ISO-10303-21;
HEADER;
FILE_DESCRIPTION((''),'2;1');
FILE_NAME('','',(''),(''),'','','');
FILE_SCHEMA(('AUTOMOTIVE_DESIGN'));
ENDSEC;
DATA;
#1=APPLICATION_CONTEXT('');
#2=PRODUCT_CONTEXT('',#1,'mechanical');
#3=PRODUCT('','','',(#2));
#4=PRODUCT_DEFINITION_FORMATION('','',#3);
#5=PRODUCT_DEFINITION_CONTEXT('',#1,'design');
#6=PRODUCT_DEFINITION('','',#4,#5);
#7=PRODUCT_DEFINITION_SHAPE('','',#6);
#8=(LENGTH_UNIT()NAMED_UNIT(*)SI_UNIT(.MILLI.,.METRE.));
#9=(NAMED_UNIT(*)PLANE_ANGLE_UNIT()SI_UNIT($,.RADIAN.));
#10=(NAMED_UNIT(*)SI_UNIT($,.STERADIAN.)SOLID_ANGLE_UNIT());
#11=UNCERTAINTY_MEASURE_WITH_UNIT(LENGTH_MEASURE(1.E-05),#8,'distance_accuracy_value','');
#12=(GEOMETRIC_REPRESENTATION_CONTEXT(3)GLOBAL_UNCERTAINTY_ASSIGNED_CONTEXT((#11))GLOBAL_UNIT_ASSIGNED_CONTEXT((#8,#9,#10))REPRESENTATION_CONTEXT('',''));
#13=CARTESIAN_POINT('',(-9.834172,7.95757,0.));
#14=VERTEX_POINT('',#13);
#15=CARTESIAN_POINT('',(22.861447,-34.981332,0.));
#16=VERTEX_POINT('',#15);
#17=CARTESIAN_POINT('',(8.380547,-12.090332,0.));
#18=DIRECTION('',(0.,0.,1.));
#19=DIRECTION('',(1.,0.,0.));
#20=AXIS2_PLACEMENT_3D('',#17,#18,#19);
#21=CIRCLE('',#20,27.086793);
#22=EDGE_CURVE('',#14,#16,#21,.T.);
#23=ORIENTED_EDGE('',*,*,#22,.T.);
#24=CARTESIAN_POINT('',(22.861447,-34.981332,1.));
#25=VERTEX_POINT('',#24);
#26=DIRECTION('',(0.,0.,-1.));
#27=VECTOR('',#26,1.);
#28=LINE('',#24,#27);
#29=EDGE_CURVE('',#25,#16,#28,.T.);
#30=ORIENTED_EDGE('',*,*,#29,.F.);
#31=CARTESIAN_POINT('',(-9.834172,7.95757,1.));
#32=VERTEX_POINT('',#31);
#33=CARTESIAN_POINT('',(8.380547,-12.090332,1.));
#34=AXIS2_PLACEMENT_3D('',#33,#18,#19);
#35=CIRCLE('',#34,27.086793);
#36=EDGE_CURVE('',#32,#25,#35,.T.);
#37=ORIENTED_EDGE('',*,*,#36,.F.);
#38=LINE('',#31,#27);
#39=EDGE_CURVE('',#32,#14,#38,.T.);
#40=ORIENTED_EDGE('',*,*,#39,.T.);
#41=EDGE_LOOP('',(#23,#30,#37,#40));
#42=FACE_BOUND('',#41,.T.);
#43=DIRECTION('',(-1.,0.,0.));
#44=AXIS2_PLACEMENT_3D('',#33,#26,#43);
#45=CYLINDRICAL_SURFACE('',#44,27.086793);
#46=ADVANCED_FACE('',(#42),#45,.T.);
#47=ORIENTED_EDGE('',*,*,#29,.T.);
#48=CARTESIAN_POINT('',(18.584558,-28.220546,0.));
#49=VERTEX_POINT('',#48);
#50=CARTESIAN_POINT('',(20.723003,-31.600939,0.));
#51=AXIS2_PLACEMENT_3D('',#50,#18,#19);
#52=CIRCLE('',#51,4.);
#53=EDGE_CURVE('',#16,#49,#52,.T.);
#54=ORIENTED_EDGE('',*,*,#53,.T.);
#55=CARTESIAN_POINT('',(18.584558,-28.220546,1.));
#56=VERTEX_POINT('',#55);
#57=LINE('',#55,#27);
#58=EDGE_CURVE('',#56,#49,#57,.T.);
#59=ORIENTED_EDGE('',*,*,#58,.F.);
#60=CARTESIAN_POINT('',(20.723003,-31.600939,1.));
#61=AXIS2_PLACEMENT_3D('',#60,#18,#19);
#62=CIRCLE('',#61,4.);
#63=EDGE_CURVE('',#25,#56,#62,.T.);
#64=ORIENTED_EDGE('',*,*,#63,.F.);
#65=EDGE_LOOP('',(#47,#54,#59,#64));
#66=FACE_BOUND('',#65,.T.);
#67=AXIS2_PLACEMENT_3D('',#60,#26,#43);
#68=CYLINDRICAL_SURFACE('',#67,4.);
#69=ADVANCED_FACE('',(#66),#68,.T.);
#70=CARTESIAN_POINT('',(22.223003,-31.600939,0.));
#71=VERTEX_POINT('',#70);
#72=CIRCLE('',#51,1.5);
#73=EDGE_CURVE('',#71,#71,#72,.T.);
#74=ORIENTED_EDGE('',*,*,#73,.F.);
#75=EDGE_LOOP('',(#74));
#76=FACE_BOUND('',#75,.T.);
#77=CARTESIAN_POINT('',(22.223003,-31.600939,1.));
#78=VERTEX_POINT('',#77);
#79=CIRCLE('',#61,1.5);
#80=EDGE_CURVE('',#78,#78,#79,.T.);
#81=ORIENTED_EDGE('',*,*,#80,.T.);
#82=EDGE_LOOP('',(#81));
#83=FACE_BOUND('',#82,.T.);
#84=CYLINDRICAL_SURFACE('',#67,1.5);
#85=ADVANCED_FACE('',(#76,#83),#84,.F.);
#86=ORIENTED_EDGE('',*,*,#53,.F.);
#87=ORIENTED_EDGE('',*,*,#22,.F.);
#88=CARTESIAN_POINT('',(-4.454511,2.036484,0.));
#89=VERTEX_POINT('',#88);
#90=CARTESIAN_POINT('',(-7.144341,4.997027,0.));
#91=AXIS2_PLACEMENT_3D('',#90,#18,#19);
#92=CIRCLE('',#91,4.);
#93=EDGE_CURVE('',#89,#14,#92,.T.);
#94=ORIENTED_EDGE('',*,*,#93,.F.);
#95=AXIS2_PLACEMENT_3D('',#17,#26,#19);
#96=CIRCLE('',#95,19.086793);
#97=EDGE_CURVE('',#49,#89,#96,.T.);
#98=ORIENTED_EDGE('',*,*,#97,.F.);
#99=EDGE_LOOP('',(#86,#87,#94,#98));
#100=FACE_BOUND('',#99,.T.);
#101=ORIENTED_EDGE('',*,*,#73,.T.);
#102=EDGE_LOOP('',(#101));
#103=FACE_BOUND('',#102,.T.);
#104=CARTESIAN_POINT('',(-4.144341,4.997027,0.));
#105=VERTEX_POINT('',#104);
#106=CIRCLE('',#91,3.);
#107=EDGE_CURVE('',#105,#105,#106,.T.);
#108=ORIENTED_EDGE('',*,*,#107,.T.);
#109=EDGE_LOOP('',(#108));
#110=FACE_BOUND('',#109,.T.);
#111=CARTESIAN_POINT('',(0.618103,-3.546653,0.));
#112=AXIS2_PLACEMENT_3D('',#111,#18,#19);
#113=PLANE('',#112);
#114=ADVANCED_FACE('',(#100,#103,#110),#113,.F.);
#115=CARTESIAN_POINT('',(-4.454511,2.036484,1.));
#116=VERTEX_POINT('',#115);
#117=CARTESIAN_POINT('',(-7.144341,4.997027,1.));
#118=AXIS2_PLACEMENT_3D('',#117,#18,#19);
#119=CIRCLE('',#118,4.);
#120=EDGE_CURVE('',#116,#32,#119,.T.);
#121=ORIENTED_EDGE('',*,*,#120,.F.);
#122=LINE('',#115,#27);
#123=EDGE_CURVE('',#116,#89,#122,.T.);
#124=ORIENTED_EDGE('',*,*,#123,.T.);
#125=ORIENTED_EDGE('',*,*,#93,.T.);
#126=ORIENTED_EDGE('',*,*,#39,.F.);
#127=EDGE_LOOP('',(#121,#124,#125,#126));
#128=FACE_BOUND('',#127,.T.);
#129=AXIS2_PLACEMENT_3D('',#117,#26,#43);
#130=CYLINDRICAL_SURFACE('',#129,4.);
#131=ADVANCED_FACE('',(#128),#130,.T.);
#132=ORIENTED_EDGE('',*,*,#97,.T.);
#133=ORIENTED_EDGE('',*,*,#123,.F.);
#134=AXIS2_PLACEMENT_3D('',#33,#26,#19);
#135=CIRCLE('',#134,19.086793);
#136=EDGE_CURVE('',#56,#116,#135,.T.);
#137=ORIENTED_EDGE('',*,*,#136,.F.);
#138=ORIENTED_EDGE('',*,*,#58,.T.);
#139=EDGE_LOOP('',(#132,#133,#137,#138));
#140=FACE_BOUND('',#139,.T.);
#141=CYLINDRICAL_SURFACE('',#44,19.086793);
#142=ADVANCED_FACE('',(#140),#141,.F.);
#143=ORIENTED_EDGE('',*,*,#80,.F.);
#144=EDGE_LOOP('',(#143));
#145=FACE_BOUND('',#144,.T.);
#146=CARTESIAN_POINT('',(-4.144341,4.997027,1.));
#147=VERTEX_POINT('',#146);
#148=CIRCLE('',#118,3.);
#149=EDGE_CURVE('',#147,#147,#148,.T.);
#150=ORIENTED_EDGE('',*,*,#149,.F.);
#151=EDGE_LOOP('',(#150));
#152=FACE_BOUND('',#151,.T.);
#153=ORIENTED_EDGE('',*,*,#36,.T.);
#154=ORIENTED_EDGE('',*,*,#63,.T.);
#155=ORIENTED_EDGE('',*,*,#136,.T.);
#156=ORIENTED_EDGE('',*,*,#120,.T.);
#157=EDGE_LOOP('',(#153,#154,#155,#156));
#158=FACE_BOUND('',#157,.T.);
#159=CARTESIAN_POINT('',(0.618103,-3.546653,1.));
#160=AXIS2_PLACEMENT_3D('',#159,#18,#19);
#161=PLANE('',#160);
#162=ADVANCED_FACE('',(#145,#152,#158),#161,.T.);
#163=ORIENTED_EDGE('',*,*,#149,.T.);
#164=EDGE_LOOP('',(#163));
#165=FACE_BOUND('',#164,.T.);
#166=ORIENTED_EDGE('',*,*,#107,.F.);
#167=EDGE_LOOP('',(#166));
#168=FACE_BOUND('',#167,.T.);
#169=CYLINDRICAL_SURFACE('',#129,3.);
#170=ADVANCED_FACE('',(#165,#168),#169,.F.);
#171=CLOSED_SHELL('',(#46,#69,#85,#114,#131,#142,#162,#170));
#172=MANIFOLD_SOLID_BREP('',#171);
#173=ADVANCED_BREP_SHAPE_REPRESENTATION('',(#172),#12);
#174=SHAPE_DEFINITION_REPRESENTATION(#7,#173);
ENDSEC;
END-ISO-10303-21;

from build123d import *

# Parameters (mm, degrees)
ESQUISSE1_R               = 1.5
ESQUISSE1_R_2             = 3
T_LE_DE_BASE_PLI_E1_DEPTH = 1


# Sheet-metal steps are written as plain solids
with BuildPart() as part:
    # Esquisse1 → Tôle de base pliée1 (new body)
    with BuildSketch(Plane.XY):
        with BuildLine():
            ThreePointArc((-9.834171673, 7.957569633), (-13.169921185, -28.499832093), (22.861447454, -34.981331874))
            ThreePointArc((22.861447454, -34.981331874), (24.103395688, -29.462494624), (18.584558439, -28.22054639))
            ThreePointArc((18.584558439, -28.22054639), (-6.805057533, -23.653337412), (-4.454511265, 2.0364841))
            ThreePointArc((-4.454511265, 2.0364841), (-4.183798702, 7.686857071), (-9.834171673, 7.957569633))
        make_face()
        with Locations((20.723002946, -31.600939132)):
            Circle(ESQUISSE1_R, mode=Mode.SUBTRACT)
        with Locations((-7.144341469, 4.997026867)):
            Circle(ESQUISSE1_R_2, mode=Mode.SUBTRACT)
    extrude(amount=T_LE_DE_BASE_PLI_E1_DEPTH)


solid = part.part
